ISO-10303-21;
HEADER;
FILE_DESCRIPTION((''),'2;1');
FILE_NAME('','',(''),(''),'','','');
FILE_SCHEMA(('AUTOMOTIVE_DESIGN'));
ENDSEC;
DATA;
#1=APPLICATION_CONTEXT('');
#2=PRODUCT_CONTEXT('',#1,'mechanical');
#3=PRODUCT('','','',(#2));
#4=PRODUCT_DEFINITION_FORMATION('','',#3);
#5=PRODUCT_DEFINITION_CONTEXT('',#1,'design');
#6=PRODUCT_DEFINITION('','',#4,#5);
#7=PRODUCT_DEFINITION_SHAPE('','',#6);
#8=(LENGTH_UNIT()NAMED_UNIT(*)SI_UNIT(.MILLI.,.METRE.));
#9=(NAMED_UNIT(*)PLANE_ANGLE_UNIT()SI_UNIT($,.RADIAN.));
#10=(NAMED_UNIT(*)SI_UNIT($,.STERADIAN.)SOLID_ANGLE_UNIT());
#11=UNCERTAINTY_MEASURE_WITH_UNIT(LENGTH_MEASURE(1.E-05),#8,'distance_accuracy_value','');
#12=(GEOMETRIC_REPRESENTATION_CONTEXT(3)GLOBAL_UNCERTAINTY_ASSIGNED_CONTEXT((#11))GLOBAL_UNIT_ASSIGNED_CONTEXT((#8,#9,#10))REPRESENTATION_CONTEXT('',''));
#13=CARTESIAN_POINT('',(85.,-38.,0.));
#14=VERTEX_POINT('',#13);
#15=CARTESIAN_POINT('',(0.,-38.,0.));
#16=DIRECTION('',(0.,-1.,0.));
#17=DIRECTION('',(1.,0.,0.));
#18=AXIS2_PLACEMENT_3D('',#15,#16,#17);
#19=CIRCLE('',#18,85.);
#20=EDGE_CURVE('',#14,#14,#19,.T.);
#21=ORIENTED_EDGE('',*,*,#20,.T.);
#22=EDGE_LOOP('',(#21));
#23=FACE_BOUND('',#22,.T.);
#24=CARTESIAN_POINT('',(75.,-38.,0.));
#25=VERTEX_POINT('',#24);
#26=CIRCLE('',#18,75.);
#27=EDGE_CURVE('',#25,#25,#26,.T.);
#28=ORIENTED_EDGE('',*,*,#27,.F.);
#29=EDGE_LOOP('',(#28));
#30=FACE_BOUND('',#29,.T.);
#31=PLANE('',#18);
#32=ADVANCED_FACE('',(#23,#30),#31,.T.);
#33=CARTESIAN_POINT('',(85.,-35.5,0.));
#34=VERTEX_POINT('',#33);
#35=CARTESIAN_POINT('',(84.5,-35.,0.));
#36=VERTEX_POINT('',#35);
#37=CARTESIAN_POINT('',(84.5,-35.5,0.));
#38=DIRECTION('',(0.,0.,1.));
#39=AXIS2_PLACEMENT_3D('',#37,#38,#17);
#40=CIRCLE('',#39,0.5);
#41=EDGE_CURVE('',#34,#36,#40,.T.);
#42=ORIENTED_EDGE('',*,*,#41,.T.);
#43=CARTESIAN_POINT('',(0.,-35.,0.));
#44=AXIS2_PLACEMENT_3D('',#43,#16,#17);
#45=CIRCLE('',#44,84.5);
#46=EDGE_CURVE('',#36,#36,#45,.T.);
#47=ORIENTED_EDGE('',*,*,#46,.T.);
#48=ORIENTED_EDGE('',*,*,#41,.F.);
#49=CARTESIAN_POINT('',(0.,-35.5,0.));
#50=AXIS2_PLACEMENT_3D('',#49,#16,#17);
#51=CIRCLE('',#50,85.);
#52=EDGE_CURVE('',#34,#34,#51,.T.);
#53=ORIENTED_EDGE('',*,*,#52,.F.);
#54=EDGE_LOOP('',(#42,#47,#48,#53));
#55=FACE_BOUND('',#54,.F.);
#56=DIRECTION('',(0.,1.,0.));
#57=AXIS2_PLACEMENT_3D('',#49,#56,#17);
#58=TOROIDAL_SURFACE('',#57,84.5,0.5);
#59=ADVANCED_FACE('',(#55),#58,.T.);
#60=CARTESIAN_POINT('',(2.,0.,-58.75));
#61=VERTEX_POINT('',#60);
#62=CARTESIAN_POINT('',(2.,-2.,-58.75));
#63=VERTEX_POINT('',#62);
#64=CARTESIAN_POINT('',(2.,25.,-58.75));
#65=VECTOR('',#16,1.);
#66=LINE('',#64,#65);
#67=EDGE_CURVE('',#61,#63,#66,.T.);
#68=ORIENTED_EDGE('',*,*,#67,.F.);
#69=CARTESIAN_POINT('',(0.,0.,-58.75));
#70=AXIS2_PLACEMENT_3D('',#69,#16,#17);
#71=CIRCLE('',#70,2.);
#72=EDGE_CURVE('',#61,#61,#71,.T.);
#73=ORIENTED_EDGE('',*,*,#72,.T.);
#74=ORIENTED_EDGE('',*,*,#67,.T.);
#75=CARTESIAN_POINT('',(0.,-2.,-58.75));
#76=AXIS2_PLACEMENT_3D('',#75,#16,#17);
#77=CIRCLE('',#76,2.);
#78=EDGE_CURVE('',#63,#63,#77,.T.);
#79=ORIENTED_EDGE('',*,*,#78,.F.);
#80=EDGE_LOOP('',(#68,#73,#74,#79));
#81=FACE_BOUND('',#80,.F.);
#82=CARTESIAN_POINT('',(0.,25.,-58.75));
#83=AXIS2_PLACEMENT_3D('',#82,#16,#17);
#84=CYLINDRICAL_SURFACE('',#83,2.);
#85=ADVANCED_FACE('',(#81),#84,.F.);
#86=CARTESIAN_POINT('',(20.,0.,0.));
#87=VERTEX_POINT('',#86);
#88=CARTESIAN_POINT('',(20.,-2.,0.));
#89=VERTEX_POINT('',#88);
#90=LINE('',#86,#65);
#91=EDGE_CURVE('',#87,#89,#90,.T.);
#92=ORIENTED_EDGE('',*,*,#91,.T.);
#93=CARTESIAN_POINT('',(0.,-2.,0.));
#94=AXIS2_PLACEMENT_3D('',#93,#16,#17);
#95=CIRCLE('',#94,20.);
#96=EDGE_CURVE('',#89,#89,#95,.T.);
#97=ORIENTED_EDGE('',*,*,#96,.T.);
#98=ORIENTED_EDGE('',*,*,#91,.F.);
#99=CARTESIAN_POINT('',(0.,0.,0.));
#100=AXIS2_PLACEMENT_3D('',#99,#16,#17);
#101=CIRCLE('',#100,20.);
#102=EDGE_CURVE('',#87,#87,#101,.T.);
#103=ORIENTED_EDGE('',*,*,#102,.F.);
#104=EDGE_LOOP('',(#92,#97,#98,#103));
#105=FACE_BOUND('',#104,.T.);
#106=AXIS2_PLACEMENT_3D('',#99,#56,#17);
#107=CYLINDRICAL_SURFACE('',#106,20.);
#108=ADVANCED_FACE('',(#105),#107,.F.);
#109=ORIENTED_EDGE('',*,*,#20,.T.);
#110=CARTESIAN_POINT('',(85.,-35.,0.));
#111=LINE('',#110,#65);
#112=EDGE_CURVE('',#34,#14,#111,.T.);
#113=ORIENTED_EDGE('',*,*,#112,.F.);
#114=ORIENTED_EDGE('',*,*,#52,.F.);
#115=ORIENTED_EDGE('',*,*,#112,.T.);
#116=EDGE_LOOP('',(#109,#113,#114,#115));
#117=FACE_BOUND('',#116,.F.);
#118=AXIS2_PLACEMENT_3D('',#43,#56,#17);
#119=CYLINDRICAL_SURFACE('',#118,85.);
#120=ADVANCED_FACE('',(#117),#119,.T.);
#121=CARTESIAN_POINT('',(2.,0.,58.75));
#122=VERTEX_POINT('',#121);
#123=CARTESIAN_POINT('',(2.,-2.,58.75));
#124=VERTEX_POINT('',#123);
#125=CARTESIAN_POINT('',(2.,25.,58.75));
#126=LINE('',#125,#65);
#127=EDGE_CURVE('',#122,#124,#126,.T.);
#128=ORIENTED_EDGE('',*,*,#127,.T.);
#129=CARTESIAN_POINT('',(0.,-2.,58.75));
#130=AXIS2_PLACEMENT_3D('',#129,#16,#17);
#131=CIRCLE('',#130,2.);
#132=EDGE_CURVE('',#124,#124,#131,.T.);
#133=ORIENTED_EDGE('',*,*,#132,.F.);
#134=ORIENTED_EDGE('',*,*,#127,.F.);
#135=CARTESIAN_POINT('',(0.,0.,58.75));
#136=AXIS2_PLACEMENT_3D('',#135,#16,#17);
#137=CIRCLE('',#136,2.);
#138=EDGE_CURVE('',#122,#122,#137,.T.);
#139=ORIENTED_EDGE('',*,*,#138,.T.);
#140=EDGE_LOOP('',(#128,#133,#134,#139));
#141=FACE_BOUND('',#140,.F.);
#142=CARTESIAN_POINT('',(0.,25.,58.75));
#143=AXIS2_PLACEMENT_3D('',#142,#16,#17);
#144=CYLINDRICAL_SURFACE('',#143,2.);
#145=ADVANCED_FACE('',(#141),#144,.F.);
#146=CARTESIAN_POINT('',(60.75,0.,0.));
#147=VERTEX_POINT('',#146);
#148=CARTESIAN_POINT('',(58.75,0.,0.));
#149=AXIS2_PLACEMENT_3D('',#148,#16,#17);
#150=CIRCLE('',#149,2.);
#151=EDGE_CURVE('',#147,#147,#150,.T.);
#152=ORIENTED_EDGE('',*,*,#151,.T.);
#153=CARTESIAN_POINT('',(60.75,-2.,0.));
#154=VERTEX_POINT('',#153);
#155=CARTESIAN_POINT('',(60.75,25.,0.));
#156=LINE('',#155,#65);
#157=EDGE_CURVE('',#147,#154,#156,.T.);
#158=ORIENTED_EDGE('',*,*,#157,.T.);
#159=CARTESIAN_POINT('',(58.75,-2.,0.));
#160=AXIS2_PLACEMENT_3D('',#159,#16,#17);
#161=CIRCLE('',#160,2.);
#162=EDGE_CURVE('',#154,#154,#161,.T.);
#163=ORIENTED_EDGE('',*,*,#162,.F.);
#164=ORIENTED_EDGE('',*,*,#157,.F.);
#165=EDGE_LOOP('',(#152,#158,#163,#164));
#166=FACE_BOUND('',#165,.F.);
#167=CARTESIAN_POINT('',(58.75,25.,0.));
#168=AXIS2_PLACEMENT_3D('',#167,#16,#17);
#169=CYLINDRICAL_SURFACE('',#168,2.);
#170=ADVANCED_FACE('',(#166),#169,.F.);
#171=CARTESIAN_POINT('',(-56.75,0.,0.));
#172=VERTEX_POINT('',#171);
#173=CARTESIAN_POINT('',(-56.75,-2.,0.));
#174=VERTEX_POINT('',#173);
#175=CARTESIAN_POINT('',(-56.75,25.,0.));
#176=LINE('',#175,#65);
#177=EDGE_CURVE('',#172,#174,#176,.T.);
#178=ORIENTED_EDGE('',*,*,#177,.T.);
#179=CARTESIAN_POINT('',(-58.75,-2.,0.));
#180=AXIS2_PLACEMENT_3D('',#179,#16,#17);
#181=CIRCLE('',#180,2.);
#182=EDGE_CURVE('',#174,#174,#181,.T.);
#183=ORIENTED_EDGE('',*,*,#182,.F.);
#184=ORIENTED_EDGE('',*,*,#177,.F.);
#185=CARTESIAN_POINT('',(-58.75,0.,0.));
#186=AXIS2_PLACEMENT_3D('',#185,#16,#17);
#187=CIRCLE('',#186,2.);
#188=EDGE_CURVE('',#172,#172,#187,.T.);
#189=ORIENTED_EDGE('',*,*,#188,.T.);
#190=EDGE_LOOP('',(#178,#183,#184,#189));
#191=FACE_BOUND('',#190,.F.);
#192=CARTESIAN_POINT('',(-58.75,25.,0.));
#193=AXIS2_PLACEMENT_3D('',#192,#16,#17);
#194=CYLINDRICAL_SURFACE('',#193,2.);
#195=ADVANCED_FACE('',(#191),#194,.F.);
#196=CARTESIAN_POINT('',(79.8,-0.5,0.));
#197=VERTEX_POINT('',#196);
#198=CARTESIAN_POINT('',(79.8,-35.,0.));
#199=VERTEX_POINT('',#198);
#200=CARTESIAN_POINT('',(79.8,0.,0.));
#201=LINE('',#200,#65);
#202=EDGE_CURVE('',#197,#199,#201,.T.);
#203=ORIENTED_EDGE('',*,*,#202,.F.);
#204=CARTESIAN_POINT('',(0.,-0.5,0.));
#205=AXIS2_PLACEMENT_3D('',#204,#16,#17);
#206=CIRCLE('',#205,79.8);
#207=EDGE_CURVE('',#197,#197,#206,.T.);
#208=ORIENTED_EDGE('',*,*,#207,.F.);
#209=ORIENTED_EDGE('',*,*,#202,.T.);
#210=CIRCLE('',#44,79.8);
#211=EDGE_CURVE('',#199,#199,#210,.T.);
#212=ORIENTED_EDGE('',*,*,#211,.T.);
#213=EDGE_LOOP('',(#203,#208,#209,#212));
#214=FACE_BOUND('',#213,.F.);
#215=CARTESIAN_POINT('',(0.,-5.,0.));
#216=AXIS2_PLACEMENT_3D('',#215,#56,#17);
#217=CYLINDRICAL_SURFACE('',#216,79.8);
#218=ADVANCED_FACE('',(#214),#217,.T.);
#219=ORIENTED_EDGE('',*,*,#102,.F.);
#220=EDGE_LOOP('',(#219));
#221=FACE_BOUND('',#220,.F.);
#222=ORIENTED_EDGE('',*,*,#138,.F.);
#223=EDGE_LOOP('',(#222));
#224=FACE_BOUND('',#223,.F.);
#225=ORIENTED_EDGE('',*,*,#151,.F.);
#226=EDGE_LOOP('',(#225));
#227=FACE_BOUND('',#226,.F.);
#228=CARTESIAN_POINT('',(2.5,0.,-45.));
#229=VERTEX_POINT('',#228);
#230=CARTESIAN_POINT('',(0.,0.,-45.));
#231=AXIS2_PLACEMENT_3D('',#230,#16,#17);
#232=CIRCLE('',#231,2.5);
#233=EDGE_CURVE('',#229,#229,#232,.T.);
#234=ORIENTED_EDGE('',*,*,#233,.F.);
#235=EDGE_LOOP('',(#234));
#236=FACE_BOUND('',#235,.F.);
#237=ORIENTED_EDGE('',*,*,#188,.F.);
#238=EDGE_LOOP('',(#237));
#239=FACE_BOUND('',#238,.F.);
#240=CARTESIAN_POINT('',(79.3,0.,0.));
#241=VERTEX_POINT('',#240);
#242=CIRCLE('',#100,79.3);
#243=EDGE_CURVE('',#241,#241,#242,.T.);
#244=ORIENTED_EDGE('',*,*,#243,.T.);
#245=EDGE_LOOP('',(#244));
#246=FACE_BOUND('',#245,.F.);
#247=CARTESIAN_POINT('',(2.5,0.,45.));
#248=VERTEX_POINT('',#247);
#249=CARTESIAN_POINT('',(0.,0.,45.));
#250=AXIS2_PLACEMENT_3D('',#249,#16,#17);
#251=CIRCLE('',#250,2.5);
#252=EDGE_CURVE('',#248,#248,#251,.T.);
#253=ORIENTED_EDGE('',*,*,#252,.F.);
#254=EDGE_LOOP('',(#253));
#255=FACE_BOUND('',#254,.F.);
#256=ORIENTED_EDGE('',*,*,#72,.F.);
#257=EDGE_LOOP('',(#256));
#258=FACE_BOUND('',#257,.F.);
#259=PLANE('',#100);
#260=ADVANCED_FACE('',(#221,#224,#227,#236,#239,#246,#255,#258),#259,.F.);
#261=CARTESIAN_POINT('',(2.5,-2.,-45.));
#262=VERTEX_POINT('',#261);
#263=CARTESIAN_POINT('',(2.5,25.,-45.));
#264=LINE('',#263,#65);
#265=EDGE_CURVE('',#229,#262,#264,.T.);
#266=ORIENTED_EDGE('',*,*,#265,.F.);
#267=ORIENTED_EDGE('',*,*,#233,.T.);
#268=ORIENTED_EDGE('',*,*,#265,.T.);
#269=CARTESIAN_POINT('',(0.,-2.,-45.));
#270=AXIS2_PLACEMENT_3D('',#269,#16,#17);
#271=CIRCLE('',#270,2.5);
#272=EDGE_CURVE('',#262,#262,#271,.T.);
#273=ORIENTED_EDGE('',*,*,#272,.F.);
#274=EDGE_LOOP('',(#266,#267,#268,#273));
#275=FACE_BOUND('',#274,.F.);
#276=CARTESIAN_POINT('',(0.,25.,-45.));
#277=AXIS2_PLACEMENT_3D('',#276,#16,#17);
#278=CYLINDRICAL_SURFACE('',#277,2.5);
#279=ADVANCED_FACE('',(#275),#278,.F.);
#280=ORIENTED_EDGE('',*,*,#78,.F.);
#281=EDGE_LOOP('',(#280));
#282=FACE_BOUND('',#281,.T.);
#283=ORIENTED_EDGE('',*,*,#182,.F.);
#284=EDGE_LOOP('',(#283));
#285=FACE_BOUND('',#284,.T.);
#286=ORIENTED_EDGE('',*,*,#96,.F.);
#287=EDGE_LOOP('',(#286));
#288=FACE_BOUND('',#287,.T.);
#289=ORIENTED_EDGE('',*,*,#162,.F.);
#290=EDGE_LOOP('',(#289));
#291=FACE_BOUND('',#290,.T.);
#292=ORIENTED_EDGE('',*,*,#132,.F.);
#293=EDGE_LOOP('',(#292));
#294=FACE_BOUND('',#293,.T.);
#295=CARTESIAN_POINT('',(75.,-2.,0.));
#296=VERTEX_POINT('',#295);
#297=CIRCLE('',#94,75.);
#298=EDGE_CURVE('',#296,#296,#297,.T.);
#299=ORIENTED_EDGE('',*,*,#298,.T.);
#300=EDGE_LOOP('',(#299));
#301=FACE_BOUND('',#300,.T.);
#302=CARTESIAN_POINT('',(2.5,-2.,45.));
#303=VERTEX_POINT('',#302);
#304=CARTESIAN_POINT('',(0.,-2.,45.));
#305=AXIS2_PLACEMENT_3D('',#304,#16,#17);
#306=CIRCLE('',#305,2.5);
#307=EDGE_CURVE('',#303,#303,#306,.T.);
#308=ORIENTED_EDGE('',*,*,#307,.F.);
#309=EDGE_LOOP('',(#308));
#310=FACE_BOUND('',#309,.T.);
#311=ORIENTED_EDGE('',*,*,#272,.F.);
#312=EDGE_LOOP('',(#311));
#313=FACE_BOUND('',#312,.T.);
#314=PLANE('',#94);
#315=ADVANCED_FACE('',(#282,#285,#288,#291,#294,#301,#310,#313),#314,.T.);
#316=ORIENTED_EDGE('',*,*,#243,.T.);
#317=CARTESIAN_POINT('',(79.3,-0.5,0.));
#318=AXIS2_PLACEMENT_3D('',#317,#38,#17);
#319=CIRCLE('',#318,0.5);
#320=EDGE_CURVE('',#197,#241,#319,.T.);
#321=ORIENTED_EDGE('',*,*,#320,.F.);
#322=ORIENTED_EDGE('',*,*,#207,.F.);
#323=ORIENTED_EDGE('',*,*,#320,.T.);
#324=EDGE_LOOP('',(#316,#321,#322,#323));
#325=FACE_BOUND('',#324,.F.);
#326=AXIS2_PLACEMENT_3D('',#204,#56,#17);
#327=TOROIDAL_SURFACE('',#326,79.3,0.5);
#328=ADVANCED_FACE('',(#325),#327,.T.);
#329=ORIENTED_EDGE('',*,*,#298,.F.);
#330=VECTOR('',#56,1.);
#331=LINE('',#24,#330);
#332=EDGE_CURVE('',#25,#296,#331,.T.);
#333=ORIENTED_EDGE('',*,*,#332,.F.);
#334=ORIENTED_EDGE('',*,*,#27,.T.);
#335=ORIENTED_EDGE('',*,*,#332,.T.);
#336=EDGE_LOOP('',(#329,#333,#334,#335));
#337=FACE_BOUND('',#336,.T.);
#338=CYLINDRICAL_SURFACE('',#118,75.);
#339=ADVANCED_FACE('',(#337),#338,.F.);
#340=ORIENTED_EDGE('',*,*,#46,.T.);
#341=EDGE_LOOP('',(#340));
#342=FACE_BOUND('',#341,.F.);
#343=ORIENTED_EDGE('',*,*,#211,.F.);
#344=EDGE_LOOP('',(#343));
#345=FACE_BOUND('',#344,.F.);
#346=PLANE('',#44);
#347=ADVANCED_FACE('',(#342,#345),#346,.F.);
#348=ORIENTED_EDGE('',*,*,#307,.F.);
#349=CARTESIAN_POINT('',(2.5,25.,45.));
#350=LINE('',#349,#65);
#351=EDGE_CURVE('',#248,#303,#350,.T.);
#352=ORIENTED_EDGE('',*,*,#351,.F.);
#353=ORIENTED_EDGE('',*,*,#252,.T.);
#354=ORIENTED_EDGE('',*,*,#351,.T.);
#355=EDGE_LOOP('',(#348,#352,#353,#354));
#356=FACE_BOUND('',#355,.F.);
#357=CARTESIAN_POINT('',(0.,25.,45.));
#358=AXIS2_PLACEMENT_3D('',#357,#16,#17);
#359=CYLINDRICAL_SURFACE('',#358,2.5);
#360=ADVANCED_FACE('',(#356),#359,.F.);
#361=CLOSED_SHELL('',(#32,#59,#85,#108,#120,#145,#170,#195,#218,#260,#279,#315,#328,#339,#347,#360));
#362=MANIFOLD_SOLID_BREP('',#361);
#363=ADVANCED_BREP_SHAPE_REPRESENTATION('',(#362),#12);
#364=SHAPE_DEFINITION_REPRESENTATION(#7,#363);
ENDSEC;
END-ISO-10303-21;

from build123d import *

# Parameters (mm, degrees)
F0_R      = 79.8
F0_R_2    = 20
F1_DEPTH  = 5
F2_R      = 79.8
F2_R_2    = 75
F3_DEPTH  = 30
F4_R      = 85
F4_R_2    = 75
F5_DEPTH  = 3
F7_D      = 5
F7_DEPTH  = 25
F7_TIP    = 1.5021515476
F8_R      = 0.5
F9_DEPTH  = 3
F11_D     = 4
F11_DEPTH = 25
F11_TIP   = 1.2017212381


with BuildPart() as f1:
    # F0 (on Front) → F1 (new body)
    with BuildSketch(Plane.XZ):
        Circle(F0_R)
        Circle(F0_R_2, mode=Mode.SUBTRACT)
    extrude(amount=F1_DEPTH)

    # F2 (on face) → F3 (join)
    with BuildSketch(Plane.XZ.offset(5)):
        Circle(F2_R)
        Circle(F2_R_2, mode=Mode.SUBTRACT)
    extrude(amount=F3_DEPTH)

    # F4 (on face) → F5 (join)
    with BuildSketch(Plane.XZ.offset(35)):
        Circle(F4_R)
        Circle(F4_R_2, mode=Mode.SUBTRACT)
    extrude(amount=F5_DEPTH)

    # F7
    with Locations(Plane(origin=(0, 0, 0), x_dir=(-1, 0, 0), z_dir=(0, 1, 0))):
        with Locations((0, 45), (0, -45)):
            Hole(F7_D / 2, depth=F7_DEPTH)
            with Locations((0, 0, -(F7_DEPTH + F7_TIP / 2))):  # 118° drill point
                Cone(0, F7_D / 2, F7_TIP, mode=Mode.SUBTRACT)

    # F8
    f8_edges = [f1.edges().sort_by_distance(p)[0] for p in [
        (-79.8, 0, 0),
        (-85, -35, 0),
    ]]
    fillet(f8_edges, radius=F8_R)

    # F9 (cut): a face of the model
    f9_faces = [f1.faces().sort_by_distance(p)[0] for p in [
        (-72.8786796564, -5, 0),
    ]]
    extrude(f9_faces, amount=-F9_DEPTH, mode=Mode.SUBTRACT)

    # F11
    with Locations(Plane(origin=(0, 0, 0), x_dir=(-1, 0, 0), z_dir=(0, 1, 0))):
        with Locations((-58.75, 0), (0, 58.75), (58.75, 0), (0, -58.75)):
            Hole(F11_D / 2, depth=F11_DEPTH)
            with Locations((0, 0, -(F11_DEPTH + F11_TIP / 2))):  # 118° drill point
                Cone(0, F11_D / 2, F11_TIP, mode=Mode.SUBTRACT)


solid = f1.part
